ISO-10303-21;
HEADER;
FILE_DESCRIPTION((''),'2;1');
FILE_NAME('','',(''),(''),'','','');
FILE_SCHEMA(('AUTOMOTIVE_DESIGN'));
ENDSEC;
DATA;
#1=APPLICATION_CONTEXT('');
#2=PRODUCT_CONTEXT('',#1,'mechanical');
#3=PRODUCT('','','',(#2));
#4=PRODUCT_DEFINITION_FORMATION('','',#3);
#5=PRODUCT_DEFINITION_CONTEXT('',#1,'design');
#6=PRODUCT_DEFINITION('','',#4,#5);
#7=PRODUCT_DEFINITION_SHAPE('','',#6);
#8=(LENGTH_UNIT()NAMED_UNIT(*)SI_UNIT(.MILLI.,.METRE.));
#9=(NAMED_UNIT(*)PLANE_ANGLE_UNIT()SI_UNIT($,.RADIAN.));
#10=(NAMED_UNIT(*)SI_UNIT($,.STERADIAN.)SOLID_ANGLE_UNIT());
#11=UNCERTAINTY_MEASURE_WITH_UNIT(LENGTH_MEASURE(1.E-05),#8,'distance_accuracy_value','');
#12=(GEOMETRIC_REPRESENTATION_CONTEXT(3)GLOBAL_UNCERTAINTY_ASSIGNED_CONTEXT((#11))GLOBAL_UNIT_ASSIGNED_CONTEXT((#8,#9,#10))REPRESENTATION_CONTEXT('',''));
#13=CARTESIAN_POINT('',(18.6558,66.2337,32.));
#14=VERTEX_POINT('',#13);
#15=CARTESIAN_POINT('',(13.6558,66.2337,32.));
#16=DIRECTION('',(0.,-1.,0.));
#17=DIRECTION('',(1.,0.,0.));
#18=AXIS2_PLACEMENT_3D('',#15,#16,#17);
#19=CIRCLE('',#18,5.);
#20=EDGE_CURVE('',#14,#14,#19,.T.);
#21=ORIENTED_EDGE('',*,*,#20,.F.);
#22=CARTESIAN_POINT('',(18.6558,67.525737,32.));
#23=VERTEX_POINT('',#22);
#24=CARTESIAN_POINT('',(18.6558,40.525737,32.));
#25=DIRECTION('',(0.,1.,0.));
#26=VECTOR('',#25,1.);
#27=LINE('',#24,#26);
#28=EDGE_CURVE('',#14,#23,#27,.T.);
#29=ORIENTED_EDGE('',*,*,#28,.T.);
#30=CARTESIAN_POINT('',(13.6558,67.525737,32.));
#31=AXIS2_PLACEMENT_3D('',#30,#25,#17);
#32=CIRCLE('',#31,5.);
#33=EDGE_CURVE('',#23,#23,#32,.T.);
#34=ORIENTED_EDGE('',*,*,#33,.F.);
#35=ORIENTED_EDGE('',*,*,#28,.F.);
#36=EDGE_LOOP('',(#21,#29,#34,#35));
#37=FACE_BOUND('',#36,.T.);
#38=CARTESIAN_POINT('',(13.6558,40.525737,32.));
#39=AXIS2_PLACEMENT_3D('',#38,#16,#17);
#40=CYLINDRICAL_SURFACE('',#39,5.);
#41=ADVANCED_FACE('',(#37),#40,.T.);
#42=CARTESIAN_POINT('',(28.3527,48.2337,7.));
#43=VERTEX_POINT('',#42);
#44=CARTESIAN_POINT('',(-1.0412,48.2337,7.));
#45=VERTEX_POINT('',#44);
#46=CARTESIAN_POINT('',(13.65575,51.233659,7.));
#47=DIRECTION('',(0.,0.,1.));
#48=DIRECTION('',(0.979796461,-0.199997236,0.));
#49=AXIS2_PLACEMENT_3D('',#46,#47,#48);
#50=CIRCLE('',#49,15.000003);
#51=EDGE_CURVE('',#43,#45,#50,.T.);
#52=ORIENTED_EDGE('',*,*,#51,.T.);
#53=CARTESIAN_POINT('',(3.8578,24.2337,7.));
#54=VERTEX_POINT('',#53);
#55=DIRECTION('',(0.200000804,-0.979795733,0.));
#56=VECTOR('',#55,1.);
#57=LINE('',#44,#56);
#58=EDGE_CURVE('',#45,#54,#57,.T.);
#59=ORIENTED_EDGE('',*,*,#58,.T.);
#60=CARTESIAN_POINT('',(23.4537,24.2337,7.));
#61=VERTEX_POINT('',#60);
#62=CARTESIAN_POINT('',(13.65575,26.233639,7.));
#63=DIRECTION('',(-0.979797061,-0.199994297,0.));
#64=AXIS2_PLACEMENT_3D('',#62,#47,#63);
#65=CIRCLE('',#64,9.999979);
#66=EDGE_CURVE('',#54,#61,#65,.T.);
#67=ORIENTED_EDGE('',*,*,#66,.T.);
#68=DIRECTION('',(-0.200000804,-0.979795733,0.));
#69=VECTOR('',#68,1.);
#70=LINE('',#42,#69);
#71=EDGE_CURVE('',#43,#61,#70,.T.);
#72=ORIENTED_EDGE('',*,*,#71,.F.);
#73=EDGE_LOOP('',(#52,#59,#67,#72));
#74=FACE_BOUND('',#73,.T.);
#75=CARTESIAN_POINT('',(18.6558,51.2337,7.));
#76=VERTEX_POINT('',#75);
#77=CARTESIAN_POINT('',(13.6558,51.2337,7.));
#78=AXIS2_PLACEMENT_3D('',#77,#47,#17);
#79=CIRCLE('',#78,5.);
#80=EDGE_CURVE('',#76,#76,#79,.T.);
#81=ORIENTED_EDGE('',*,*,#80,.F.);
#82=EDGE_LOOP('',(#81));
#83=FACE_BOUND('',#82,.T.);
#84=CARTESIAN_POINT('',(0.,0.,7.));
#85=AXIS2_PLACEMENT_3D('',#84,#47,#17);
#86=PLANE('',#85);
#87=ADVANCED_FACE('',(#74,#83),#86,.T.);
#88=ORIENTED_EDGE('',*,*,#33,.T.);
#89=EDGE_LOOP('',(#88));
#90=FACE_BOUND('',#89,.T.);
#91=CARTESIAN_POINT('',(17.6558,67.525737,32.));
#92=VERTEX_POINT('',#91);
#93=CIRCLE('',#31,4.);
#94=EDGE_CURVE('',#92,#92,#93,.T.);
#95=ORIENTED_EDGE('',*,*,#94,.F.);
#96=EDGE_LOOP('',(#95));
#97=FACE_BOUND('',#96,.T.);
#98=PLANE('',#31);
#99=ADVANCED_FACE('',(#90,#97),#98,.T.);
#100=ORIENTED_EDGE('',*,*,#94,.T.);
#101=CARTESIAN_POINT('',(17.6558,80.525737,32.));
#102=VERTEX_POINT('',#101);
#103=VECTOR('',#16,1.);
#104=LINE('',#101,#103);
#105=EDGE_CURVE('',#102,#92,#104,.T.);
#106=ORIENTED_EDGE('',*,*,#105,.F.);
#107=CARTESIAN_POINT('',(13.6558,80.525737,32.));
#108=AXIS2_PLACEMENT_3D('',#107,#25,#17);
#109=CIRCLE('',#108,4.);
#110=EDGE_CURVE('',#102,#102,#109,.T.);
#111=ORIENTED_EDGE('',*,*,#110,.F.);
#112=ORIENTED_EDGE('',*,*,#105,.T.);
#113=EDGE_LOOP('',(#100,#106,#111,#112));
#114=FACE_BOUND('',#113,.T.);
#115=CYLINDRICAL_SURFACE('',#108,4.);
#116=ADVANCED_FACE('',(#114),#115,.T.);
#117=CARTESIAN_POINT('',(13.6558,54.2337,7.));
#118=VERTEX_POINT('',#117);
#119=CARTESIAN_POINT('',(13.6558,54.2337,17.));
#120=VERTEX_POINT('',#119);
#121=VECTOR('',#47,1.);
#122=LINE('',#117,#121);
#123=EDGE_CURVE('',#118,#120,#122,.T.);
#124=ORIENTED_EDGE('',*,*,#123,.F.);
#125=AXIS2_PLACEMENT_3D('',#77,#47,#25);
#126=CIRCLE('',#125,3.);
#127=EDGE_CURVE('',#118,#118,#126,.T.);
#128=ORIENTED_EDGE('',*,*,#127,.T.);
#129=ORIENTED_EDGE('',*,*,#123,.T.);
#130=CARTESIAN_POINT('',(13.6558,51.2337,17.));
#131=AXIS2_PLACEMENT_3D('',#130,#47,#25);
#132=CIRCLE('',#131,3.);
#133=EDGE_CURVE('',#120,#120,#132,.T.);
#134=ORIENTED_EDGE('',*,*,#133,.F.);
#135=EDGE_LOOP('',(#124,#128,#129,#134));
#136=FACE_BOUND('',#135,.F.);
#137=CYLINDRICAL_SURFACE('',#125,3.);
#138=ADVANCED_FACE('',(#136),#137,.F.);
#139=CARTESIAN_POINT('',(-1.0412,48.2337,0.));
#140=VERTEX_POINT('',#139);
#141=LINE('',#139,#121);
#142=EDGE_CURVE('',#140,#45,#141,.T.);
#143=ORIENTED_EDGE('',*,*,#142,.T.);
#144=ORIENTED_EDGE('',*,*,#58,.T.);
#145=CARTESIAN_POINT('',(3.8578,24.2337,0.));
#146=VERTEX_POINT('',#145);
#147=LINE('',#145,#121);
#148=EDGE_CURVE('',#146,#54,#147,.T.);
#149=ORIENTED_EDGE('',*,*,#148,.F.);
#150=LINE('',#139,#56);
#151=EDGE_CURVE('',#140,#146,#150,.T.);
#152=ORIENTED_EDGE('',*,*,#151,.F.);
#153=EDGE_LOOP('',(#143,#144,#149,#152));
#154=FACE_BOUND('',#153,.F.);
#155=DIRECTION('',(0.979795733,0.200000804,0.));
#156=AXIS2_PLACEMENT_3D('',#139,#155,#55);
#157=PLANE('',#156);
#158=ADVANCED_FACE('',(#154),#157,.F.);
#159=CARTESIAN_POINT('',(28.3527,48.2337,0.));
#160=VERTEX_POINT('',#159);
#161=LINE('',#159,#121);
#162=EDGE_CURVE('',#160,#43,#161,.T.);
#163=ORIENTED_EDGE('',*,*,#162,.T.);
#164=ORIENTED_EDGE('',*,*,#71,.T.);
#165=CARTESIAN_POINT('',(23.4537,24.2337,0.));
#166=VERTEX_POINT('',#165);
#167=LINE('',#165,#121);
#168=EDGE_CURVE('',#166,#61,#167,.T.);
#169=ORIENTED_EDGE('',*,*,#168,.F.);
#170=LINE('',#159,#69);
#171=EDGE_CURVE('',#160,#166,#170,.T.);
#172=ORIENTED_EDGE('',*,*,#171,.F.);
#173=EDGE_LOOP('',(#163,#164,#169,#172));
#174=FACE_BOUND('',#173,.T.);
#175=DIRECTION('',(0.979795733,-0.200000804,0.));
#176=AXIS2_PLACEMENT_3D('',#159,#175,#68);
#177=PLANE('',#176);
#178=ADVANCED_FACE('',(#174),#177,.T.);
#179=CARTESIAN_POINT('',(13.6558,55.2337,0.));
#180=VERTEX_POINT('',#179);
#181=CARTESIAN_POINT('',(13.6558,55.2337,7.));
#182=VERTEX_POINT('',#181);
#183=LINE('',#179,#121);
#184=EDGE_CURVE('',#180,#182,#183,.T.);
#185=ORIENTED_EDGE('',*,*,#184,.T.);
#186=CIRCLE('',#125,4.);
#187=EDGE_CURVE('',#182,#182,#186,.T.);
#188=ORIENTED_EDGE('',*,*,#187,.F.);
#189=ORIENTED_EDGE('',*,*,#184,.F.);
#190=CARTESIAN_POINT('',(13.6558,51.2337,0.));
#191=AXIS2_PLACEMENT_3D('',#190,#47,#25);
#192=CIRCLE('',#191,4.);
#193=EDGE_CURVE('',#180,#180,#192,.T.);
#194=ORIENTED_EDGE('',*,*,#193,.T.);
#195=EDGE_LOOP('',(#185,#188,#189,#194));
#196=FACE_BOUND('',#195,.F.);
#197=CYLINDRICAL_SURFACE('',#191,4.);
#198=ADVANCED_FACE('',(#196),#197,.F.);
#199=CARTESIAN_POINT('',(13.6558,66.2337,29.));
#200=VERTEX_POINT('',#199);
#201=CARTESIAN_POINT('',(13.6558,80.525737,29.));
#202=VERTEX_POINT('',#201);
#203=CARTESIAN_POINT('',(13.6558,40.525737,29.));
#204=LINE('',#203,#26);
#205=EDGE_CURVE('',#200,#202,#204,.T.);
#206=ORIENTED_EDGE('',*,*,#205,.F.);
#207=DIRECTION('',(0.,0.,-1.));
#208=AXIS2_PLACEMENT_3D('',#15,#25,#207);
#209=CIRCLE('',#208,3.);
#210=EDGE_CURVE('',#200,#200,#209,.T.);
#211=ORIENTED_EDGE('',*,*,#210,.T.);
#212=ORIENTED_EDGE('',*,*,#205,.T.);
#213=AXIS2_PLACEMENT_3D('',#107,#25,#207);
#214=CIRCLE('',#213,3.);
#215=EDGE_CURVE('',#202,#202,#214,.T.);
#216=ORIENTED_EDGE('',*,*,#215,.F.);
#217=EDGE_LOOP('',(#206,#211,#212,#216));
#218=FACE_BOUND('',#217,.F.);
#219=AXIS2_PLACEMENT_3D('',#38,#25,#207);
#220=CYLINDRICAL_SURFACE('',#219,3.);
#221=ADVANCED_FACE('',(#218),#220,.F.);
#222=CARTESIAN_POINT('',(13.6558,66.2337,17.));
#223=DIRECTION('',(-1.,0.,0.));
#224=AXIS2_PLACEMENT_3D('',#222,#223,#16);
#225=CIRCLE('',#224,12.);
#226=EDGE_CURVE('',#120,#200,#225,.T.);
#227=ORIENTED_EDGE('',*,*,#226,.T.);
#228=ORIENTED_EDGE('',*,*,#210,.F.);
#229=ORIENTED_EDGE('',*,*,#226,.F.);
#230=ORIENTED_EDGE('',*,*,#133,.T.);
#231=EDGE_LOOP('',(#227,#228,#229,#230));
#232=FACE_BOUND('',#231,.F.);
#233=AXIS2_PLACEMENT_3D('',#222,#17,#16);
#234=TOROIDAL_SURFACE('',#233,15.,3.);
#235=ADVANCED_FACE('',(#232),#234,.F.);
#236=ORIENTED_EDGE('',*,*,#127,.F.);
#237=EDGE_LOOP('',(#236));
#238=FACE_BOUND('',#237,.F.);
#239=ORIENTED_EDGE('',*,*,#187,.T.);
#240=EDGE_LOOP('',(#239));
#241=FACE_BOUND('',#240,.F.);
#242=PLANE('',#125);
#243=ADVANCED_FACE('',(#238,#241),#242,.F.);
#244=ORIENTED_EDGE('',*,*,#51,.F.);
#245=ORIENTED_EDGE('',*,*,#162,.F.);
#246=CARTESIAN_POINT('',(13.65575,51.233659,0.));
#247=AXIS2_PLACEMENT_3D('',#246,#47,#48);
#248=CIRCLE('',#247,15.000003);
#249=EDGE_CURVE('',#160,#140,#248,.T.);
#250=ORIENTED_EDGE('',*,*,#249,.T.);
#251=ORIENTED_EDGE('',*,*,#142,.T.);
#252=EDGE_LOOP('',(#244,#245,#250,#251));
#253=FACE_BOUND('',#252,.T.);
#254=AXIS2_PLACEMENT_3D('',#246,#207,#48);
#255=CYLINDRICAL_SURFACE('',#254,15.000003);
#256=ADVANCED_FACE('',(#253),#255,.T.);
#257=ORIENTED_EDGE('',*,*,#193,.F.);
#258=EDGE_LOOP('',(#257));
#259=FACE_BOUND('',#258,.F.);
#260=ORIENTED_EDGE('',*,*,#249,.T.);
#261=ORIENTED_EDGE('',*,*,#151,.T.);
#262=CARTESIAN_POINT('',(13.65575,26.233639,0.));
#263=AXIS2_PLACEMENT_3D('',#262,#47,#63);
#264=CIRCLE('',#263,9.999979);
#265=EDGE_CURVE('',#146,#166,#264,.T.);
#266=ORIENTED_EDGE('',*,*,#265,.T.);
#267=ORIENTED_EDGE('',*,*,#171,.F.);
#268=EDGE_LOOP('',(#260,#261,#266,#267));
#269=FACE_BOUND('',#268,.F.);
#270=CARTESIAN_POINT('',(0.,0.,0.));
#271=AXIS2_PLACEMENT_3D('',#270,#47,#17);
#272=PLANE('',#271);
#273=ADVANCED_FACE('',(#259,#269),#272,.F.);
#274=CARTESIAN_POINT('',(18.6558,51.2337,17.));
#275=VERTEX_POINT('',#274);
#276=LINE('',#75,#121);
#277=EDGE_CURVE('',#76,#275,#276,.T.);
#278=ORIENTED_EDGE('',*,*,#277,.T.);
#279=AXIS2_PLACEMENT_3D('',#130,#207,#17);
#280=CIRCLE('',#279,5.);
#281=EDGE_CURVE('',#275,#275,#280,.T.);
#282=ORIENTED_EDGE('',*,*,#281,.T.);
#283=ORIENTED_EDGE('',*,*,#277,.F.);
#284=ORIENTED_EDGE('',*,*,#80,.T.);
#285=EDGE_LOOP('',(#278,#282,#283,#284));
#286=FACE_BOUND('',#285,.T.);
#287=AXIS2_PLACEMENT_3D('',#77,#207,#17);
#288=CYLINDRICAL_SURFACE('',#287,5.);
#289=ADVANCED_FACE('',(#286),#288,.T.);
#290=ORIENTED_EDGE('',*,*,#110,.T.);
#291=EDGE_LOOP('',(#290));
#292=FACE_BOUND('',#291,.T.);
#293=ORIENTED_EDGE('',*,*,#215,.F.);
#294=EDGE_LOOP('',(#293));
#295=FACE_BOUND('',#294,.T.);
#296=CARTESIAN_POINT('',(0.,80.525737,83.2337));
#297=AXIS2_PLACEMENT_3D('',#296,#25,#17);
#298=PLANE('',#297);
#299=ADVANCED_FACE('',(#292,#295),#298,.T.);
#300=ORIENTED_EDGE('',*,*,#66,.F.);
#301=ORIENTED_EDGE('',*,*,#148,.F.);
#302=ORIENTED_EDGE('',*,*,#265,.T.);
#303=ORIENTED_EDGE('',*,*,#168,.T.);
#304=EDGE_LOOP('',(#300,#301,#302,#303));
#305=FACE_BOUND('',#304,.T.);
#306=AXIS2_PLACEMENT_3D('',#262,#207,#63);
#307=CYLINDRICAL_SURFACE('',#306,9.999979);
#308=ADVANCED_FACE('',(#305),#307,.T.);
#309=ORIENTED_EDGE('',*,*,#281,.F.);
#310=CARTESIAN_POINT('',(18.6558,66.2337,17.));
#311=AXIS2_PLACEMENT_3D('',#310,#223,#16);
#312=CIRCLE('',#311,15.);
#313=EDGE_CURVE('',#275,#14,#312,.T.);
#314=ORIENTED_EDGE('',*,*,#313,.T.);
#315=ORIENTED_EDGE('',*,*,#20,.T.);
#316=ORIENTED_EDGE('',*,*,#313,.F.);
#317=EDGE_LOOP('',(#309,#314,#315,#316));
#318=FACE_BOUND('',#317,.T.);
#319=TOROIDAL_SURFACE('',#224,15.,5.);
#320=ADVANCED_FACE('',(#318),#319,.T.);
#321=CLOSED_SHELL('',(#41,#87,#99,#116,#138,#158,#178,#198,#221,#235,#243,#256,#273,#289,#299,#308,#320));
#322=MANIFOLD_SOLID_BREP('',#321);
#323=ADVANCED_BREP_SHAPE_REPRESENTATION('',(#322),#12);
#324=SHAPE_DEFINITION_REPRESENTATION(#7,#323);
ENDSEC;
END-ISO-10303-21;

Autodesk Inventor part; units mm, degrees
ref_plane "YZ Plane" through (0, 0, 0) normal (1, 0, 0) x (0, 1, 0)
ref_plane "XY Plane" through (0, 0, 0) normal (0, 0, 1) x (1, 0, 0)
sketch "Sketch1" plane through (0, 0, 0) normal (0, 0, 1) x (1, 0, 0)
  arc A0 (3.8578, 24.2337) -> (23.4537, 24.2337) centre (13.6558, 26.2337) ccw
  arc A1 (28.3527, 48.2337) -> (-1.0412, 48.2337) centre (13.6558, 51.2337) ccw
  line L0 (-1.0412, 48.2337) -> (3.8578, 24.2337)
  line L1 (28.3527, 48.2337) -> (23.4537, 24.2337)
  dimension "d32" = 20
  dimension "d33" = 30
extrude "Extrusion8" add sketch "Sketch1" along normal blind 7
sketch "Sketch8" plane through (0, 0, 7) normal (0, 0, 1) x (1, 0, 0)
  arc A0 (28.3527, 48.2337) -> (-1.0412, 48.2337) centre (13.6558, 51.2337) ccw projected
  circle A1 centre (13.6558, 51.2337) radius 5
  point P0 (0, 0)
  dimension "d36" = 10
extrude "Extrusion9" add sketch "Sketch8" along normal blind 40
ref_plane "Work Plane8" through (13.6558, 56.2337, 7) normal (0, 1, 0) x (-1, 0, 0)
sketch "Sketch13" plane through (0, 0, 0) normal (0, 0, -1) x (-1, 0, 0)
  circle A0 centre (-13.6558, 51.2337) radius 5 projected
  circle A1 centre (-13.6558, 51.2337) radius 5
  point P0 (0, 0)
hole "Hole1" at (13.6558, 51.2337, 0) direction (0, 0, 1) diameter 6 end through all counterbore diameter 8 counterbore depth 7
sketch "Sketch14" plane through (13.6558, 51.2337, 47) normal (0, 0, 1) x (1, 0, 0)
  circle A0 centre (0, 0) radius 4
  arc A1 (14.6969, -3) -> (-14.6969, -3) centre (0, 0) ccw projected
  circle A2 centre (0, 0) radius 5
  point P0 (-13.6558, -51.2337)
  dimension "d52" = 8
extrude "Extrusion11" cut sketch "Sketch14" against normal blind 13
sketch "Sketch15" plane through (13.6558, 56.2337, 7) normal (0, 1, 0) x (-1, 0, 0)
  line L0 (5, 10) -> (-5.1311, 10)
  line L1 (4, 40) -> (-4, 40) projected
  point P0 (13.6558, -7)
  dimension "d55" = 30
bend part "Bend Part3" radius 10 angle 90 line through (8.6558, 56.2337, 17) along (1, 0, 0) centre toward (0, 1, 0) moving side (0, 0, 1) both sides no
properties part number "Vòi"
